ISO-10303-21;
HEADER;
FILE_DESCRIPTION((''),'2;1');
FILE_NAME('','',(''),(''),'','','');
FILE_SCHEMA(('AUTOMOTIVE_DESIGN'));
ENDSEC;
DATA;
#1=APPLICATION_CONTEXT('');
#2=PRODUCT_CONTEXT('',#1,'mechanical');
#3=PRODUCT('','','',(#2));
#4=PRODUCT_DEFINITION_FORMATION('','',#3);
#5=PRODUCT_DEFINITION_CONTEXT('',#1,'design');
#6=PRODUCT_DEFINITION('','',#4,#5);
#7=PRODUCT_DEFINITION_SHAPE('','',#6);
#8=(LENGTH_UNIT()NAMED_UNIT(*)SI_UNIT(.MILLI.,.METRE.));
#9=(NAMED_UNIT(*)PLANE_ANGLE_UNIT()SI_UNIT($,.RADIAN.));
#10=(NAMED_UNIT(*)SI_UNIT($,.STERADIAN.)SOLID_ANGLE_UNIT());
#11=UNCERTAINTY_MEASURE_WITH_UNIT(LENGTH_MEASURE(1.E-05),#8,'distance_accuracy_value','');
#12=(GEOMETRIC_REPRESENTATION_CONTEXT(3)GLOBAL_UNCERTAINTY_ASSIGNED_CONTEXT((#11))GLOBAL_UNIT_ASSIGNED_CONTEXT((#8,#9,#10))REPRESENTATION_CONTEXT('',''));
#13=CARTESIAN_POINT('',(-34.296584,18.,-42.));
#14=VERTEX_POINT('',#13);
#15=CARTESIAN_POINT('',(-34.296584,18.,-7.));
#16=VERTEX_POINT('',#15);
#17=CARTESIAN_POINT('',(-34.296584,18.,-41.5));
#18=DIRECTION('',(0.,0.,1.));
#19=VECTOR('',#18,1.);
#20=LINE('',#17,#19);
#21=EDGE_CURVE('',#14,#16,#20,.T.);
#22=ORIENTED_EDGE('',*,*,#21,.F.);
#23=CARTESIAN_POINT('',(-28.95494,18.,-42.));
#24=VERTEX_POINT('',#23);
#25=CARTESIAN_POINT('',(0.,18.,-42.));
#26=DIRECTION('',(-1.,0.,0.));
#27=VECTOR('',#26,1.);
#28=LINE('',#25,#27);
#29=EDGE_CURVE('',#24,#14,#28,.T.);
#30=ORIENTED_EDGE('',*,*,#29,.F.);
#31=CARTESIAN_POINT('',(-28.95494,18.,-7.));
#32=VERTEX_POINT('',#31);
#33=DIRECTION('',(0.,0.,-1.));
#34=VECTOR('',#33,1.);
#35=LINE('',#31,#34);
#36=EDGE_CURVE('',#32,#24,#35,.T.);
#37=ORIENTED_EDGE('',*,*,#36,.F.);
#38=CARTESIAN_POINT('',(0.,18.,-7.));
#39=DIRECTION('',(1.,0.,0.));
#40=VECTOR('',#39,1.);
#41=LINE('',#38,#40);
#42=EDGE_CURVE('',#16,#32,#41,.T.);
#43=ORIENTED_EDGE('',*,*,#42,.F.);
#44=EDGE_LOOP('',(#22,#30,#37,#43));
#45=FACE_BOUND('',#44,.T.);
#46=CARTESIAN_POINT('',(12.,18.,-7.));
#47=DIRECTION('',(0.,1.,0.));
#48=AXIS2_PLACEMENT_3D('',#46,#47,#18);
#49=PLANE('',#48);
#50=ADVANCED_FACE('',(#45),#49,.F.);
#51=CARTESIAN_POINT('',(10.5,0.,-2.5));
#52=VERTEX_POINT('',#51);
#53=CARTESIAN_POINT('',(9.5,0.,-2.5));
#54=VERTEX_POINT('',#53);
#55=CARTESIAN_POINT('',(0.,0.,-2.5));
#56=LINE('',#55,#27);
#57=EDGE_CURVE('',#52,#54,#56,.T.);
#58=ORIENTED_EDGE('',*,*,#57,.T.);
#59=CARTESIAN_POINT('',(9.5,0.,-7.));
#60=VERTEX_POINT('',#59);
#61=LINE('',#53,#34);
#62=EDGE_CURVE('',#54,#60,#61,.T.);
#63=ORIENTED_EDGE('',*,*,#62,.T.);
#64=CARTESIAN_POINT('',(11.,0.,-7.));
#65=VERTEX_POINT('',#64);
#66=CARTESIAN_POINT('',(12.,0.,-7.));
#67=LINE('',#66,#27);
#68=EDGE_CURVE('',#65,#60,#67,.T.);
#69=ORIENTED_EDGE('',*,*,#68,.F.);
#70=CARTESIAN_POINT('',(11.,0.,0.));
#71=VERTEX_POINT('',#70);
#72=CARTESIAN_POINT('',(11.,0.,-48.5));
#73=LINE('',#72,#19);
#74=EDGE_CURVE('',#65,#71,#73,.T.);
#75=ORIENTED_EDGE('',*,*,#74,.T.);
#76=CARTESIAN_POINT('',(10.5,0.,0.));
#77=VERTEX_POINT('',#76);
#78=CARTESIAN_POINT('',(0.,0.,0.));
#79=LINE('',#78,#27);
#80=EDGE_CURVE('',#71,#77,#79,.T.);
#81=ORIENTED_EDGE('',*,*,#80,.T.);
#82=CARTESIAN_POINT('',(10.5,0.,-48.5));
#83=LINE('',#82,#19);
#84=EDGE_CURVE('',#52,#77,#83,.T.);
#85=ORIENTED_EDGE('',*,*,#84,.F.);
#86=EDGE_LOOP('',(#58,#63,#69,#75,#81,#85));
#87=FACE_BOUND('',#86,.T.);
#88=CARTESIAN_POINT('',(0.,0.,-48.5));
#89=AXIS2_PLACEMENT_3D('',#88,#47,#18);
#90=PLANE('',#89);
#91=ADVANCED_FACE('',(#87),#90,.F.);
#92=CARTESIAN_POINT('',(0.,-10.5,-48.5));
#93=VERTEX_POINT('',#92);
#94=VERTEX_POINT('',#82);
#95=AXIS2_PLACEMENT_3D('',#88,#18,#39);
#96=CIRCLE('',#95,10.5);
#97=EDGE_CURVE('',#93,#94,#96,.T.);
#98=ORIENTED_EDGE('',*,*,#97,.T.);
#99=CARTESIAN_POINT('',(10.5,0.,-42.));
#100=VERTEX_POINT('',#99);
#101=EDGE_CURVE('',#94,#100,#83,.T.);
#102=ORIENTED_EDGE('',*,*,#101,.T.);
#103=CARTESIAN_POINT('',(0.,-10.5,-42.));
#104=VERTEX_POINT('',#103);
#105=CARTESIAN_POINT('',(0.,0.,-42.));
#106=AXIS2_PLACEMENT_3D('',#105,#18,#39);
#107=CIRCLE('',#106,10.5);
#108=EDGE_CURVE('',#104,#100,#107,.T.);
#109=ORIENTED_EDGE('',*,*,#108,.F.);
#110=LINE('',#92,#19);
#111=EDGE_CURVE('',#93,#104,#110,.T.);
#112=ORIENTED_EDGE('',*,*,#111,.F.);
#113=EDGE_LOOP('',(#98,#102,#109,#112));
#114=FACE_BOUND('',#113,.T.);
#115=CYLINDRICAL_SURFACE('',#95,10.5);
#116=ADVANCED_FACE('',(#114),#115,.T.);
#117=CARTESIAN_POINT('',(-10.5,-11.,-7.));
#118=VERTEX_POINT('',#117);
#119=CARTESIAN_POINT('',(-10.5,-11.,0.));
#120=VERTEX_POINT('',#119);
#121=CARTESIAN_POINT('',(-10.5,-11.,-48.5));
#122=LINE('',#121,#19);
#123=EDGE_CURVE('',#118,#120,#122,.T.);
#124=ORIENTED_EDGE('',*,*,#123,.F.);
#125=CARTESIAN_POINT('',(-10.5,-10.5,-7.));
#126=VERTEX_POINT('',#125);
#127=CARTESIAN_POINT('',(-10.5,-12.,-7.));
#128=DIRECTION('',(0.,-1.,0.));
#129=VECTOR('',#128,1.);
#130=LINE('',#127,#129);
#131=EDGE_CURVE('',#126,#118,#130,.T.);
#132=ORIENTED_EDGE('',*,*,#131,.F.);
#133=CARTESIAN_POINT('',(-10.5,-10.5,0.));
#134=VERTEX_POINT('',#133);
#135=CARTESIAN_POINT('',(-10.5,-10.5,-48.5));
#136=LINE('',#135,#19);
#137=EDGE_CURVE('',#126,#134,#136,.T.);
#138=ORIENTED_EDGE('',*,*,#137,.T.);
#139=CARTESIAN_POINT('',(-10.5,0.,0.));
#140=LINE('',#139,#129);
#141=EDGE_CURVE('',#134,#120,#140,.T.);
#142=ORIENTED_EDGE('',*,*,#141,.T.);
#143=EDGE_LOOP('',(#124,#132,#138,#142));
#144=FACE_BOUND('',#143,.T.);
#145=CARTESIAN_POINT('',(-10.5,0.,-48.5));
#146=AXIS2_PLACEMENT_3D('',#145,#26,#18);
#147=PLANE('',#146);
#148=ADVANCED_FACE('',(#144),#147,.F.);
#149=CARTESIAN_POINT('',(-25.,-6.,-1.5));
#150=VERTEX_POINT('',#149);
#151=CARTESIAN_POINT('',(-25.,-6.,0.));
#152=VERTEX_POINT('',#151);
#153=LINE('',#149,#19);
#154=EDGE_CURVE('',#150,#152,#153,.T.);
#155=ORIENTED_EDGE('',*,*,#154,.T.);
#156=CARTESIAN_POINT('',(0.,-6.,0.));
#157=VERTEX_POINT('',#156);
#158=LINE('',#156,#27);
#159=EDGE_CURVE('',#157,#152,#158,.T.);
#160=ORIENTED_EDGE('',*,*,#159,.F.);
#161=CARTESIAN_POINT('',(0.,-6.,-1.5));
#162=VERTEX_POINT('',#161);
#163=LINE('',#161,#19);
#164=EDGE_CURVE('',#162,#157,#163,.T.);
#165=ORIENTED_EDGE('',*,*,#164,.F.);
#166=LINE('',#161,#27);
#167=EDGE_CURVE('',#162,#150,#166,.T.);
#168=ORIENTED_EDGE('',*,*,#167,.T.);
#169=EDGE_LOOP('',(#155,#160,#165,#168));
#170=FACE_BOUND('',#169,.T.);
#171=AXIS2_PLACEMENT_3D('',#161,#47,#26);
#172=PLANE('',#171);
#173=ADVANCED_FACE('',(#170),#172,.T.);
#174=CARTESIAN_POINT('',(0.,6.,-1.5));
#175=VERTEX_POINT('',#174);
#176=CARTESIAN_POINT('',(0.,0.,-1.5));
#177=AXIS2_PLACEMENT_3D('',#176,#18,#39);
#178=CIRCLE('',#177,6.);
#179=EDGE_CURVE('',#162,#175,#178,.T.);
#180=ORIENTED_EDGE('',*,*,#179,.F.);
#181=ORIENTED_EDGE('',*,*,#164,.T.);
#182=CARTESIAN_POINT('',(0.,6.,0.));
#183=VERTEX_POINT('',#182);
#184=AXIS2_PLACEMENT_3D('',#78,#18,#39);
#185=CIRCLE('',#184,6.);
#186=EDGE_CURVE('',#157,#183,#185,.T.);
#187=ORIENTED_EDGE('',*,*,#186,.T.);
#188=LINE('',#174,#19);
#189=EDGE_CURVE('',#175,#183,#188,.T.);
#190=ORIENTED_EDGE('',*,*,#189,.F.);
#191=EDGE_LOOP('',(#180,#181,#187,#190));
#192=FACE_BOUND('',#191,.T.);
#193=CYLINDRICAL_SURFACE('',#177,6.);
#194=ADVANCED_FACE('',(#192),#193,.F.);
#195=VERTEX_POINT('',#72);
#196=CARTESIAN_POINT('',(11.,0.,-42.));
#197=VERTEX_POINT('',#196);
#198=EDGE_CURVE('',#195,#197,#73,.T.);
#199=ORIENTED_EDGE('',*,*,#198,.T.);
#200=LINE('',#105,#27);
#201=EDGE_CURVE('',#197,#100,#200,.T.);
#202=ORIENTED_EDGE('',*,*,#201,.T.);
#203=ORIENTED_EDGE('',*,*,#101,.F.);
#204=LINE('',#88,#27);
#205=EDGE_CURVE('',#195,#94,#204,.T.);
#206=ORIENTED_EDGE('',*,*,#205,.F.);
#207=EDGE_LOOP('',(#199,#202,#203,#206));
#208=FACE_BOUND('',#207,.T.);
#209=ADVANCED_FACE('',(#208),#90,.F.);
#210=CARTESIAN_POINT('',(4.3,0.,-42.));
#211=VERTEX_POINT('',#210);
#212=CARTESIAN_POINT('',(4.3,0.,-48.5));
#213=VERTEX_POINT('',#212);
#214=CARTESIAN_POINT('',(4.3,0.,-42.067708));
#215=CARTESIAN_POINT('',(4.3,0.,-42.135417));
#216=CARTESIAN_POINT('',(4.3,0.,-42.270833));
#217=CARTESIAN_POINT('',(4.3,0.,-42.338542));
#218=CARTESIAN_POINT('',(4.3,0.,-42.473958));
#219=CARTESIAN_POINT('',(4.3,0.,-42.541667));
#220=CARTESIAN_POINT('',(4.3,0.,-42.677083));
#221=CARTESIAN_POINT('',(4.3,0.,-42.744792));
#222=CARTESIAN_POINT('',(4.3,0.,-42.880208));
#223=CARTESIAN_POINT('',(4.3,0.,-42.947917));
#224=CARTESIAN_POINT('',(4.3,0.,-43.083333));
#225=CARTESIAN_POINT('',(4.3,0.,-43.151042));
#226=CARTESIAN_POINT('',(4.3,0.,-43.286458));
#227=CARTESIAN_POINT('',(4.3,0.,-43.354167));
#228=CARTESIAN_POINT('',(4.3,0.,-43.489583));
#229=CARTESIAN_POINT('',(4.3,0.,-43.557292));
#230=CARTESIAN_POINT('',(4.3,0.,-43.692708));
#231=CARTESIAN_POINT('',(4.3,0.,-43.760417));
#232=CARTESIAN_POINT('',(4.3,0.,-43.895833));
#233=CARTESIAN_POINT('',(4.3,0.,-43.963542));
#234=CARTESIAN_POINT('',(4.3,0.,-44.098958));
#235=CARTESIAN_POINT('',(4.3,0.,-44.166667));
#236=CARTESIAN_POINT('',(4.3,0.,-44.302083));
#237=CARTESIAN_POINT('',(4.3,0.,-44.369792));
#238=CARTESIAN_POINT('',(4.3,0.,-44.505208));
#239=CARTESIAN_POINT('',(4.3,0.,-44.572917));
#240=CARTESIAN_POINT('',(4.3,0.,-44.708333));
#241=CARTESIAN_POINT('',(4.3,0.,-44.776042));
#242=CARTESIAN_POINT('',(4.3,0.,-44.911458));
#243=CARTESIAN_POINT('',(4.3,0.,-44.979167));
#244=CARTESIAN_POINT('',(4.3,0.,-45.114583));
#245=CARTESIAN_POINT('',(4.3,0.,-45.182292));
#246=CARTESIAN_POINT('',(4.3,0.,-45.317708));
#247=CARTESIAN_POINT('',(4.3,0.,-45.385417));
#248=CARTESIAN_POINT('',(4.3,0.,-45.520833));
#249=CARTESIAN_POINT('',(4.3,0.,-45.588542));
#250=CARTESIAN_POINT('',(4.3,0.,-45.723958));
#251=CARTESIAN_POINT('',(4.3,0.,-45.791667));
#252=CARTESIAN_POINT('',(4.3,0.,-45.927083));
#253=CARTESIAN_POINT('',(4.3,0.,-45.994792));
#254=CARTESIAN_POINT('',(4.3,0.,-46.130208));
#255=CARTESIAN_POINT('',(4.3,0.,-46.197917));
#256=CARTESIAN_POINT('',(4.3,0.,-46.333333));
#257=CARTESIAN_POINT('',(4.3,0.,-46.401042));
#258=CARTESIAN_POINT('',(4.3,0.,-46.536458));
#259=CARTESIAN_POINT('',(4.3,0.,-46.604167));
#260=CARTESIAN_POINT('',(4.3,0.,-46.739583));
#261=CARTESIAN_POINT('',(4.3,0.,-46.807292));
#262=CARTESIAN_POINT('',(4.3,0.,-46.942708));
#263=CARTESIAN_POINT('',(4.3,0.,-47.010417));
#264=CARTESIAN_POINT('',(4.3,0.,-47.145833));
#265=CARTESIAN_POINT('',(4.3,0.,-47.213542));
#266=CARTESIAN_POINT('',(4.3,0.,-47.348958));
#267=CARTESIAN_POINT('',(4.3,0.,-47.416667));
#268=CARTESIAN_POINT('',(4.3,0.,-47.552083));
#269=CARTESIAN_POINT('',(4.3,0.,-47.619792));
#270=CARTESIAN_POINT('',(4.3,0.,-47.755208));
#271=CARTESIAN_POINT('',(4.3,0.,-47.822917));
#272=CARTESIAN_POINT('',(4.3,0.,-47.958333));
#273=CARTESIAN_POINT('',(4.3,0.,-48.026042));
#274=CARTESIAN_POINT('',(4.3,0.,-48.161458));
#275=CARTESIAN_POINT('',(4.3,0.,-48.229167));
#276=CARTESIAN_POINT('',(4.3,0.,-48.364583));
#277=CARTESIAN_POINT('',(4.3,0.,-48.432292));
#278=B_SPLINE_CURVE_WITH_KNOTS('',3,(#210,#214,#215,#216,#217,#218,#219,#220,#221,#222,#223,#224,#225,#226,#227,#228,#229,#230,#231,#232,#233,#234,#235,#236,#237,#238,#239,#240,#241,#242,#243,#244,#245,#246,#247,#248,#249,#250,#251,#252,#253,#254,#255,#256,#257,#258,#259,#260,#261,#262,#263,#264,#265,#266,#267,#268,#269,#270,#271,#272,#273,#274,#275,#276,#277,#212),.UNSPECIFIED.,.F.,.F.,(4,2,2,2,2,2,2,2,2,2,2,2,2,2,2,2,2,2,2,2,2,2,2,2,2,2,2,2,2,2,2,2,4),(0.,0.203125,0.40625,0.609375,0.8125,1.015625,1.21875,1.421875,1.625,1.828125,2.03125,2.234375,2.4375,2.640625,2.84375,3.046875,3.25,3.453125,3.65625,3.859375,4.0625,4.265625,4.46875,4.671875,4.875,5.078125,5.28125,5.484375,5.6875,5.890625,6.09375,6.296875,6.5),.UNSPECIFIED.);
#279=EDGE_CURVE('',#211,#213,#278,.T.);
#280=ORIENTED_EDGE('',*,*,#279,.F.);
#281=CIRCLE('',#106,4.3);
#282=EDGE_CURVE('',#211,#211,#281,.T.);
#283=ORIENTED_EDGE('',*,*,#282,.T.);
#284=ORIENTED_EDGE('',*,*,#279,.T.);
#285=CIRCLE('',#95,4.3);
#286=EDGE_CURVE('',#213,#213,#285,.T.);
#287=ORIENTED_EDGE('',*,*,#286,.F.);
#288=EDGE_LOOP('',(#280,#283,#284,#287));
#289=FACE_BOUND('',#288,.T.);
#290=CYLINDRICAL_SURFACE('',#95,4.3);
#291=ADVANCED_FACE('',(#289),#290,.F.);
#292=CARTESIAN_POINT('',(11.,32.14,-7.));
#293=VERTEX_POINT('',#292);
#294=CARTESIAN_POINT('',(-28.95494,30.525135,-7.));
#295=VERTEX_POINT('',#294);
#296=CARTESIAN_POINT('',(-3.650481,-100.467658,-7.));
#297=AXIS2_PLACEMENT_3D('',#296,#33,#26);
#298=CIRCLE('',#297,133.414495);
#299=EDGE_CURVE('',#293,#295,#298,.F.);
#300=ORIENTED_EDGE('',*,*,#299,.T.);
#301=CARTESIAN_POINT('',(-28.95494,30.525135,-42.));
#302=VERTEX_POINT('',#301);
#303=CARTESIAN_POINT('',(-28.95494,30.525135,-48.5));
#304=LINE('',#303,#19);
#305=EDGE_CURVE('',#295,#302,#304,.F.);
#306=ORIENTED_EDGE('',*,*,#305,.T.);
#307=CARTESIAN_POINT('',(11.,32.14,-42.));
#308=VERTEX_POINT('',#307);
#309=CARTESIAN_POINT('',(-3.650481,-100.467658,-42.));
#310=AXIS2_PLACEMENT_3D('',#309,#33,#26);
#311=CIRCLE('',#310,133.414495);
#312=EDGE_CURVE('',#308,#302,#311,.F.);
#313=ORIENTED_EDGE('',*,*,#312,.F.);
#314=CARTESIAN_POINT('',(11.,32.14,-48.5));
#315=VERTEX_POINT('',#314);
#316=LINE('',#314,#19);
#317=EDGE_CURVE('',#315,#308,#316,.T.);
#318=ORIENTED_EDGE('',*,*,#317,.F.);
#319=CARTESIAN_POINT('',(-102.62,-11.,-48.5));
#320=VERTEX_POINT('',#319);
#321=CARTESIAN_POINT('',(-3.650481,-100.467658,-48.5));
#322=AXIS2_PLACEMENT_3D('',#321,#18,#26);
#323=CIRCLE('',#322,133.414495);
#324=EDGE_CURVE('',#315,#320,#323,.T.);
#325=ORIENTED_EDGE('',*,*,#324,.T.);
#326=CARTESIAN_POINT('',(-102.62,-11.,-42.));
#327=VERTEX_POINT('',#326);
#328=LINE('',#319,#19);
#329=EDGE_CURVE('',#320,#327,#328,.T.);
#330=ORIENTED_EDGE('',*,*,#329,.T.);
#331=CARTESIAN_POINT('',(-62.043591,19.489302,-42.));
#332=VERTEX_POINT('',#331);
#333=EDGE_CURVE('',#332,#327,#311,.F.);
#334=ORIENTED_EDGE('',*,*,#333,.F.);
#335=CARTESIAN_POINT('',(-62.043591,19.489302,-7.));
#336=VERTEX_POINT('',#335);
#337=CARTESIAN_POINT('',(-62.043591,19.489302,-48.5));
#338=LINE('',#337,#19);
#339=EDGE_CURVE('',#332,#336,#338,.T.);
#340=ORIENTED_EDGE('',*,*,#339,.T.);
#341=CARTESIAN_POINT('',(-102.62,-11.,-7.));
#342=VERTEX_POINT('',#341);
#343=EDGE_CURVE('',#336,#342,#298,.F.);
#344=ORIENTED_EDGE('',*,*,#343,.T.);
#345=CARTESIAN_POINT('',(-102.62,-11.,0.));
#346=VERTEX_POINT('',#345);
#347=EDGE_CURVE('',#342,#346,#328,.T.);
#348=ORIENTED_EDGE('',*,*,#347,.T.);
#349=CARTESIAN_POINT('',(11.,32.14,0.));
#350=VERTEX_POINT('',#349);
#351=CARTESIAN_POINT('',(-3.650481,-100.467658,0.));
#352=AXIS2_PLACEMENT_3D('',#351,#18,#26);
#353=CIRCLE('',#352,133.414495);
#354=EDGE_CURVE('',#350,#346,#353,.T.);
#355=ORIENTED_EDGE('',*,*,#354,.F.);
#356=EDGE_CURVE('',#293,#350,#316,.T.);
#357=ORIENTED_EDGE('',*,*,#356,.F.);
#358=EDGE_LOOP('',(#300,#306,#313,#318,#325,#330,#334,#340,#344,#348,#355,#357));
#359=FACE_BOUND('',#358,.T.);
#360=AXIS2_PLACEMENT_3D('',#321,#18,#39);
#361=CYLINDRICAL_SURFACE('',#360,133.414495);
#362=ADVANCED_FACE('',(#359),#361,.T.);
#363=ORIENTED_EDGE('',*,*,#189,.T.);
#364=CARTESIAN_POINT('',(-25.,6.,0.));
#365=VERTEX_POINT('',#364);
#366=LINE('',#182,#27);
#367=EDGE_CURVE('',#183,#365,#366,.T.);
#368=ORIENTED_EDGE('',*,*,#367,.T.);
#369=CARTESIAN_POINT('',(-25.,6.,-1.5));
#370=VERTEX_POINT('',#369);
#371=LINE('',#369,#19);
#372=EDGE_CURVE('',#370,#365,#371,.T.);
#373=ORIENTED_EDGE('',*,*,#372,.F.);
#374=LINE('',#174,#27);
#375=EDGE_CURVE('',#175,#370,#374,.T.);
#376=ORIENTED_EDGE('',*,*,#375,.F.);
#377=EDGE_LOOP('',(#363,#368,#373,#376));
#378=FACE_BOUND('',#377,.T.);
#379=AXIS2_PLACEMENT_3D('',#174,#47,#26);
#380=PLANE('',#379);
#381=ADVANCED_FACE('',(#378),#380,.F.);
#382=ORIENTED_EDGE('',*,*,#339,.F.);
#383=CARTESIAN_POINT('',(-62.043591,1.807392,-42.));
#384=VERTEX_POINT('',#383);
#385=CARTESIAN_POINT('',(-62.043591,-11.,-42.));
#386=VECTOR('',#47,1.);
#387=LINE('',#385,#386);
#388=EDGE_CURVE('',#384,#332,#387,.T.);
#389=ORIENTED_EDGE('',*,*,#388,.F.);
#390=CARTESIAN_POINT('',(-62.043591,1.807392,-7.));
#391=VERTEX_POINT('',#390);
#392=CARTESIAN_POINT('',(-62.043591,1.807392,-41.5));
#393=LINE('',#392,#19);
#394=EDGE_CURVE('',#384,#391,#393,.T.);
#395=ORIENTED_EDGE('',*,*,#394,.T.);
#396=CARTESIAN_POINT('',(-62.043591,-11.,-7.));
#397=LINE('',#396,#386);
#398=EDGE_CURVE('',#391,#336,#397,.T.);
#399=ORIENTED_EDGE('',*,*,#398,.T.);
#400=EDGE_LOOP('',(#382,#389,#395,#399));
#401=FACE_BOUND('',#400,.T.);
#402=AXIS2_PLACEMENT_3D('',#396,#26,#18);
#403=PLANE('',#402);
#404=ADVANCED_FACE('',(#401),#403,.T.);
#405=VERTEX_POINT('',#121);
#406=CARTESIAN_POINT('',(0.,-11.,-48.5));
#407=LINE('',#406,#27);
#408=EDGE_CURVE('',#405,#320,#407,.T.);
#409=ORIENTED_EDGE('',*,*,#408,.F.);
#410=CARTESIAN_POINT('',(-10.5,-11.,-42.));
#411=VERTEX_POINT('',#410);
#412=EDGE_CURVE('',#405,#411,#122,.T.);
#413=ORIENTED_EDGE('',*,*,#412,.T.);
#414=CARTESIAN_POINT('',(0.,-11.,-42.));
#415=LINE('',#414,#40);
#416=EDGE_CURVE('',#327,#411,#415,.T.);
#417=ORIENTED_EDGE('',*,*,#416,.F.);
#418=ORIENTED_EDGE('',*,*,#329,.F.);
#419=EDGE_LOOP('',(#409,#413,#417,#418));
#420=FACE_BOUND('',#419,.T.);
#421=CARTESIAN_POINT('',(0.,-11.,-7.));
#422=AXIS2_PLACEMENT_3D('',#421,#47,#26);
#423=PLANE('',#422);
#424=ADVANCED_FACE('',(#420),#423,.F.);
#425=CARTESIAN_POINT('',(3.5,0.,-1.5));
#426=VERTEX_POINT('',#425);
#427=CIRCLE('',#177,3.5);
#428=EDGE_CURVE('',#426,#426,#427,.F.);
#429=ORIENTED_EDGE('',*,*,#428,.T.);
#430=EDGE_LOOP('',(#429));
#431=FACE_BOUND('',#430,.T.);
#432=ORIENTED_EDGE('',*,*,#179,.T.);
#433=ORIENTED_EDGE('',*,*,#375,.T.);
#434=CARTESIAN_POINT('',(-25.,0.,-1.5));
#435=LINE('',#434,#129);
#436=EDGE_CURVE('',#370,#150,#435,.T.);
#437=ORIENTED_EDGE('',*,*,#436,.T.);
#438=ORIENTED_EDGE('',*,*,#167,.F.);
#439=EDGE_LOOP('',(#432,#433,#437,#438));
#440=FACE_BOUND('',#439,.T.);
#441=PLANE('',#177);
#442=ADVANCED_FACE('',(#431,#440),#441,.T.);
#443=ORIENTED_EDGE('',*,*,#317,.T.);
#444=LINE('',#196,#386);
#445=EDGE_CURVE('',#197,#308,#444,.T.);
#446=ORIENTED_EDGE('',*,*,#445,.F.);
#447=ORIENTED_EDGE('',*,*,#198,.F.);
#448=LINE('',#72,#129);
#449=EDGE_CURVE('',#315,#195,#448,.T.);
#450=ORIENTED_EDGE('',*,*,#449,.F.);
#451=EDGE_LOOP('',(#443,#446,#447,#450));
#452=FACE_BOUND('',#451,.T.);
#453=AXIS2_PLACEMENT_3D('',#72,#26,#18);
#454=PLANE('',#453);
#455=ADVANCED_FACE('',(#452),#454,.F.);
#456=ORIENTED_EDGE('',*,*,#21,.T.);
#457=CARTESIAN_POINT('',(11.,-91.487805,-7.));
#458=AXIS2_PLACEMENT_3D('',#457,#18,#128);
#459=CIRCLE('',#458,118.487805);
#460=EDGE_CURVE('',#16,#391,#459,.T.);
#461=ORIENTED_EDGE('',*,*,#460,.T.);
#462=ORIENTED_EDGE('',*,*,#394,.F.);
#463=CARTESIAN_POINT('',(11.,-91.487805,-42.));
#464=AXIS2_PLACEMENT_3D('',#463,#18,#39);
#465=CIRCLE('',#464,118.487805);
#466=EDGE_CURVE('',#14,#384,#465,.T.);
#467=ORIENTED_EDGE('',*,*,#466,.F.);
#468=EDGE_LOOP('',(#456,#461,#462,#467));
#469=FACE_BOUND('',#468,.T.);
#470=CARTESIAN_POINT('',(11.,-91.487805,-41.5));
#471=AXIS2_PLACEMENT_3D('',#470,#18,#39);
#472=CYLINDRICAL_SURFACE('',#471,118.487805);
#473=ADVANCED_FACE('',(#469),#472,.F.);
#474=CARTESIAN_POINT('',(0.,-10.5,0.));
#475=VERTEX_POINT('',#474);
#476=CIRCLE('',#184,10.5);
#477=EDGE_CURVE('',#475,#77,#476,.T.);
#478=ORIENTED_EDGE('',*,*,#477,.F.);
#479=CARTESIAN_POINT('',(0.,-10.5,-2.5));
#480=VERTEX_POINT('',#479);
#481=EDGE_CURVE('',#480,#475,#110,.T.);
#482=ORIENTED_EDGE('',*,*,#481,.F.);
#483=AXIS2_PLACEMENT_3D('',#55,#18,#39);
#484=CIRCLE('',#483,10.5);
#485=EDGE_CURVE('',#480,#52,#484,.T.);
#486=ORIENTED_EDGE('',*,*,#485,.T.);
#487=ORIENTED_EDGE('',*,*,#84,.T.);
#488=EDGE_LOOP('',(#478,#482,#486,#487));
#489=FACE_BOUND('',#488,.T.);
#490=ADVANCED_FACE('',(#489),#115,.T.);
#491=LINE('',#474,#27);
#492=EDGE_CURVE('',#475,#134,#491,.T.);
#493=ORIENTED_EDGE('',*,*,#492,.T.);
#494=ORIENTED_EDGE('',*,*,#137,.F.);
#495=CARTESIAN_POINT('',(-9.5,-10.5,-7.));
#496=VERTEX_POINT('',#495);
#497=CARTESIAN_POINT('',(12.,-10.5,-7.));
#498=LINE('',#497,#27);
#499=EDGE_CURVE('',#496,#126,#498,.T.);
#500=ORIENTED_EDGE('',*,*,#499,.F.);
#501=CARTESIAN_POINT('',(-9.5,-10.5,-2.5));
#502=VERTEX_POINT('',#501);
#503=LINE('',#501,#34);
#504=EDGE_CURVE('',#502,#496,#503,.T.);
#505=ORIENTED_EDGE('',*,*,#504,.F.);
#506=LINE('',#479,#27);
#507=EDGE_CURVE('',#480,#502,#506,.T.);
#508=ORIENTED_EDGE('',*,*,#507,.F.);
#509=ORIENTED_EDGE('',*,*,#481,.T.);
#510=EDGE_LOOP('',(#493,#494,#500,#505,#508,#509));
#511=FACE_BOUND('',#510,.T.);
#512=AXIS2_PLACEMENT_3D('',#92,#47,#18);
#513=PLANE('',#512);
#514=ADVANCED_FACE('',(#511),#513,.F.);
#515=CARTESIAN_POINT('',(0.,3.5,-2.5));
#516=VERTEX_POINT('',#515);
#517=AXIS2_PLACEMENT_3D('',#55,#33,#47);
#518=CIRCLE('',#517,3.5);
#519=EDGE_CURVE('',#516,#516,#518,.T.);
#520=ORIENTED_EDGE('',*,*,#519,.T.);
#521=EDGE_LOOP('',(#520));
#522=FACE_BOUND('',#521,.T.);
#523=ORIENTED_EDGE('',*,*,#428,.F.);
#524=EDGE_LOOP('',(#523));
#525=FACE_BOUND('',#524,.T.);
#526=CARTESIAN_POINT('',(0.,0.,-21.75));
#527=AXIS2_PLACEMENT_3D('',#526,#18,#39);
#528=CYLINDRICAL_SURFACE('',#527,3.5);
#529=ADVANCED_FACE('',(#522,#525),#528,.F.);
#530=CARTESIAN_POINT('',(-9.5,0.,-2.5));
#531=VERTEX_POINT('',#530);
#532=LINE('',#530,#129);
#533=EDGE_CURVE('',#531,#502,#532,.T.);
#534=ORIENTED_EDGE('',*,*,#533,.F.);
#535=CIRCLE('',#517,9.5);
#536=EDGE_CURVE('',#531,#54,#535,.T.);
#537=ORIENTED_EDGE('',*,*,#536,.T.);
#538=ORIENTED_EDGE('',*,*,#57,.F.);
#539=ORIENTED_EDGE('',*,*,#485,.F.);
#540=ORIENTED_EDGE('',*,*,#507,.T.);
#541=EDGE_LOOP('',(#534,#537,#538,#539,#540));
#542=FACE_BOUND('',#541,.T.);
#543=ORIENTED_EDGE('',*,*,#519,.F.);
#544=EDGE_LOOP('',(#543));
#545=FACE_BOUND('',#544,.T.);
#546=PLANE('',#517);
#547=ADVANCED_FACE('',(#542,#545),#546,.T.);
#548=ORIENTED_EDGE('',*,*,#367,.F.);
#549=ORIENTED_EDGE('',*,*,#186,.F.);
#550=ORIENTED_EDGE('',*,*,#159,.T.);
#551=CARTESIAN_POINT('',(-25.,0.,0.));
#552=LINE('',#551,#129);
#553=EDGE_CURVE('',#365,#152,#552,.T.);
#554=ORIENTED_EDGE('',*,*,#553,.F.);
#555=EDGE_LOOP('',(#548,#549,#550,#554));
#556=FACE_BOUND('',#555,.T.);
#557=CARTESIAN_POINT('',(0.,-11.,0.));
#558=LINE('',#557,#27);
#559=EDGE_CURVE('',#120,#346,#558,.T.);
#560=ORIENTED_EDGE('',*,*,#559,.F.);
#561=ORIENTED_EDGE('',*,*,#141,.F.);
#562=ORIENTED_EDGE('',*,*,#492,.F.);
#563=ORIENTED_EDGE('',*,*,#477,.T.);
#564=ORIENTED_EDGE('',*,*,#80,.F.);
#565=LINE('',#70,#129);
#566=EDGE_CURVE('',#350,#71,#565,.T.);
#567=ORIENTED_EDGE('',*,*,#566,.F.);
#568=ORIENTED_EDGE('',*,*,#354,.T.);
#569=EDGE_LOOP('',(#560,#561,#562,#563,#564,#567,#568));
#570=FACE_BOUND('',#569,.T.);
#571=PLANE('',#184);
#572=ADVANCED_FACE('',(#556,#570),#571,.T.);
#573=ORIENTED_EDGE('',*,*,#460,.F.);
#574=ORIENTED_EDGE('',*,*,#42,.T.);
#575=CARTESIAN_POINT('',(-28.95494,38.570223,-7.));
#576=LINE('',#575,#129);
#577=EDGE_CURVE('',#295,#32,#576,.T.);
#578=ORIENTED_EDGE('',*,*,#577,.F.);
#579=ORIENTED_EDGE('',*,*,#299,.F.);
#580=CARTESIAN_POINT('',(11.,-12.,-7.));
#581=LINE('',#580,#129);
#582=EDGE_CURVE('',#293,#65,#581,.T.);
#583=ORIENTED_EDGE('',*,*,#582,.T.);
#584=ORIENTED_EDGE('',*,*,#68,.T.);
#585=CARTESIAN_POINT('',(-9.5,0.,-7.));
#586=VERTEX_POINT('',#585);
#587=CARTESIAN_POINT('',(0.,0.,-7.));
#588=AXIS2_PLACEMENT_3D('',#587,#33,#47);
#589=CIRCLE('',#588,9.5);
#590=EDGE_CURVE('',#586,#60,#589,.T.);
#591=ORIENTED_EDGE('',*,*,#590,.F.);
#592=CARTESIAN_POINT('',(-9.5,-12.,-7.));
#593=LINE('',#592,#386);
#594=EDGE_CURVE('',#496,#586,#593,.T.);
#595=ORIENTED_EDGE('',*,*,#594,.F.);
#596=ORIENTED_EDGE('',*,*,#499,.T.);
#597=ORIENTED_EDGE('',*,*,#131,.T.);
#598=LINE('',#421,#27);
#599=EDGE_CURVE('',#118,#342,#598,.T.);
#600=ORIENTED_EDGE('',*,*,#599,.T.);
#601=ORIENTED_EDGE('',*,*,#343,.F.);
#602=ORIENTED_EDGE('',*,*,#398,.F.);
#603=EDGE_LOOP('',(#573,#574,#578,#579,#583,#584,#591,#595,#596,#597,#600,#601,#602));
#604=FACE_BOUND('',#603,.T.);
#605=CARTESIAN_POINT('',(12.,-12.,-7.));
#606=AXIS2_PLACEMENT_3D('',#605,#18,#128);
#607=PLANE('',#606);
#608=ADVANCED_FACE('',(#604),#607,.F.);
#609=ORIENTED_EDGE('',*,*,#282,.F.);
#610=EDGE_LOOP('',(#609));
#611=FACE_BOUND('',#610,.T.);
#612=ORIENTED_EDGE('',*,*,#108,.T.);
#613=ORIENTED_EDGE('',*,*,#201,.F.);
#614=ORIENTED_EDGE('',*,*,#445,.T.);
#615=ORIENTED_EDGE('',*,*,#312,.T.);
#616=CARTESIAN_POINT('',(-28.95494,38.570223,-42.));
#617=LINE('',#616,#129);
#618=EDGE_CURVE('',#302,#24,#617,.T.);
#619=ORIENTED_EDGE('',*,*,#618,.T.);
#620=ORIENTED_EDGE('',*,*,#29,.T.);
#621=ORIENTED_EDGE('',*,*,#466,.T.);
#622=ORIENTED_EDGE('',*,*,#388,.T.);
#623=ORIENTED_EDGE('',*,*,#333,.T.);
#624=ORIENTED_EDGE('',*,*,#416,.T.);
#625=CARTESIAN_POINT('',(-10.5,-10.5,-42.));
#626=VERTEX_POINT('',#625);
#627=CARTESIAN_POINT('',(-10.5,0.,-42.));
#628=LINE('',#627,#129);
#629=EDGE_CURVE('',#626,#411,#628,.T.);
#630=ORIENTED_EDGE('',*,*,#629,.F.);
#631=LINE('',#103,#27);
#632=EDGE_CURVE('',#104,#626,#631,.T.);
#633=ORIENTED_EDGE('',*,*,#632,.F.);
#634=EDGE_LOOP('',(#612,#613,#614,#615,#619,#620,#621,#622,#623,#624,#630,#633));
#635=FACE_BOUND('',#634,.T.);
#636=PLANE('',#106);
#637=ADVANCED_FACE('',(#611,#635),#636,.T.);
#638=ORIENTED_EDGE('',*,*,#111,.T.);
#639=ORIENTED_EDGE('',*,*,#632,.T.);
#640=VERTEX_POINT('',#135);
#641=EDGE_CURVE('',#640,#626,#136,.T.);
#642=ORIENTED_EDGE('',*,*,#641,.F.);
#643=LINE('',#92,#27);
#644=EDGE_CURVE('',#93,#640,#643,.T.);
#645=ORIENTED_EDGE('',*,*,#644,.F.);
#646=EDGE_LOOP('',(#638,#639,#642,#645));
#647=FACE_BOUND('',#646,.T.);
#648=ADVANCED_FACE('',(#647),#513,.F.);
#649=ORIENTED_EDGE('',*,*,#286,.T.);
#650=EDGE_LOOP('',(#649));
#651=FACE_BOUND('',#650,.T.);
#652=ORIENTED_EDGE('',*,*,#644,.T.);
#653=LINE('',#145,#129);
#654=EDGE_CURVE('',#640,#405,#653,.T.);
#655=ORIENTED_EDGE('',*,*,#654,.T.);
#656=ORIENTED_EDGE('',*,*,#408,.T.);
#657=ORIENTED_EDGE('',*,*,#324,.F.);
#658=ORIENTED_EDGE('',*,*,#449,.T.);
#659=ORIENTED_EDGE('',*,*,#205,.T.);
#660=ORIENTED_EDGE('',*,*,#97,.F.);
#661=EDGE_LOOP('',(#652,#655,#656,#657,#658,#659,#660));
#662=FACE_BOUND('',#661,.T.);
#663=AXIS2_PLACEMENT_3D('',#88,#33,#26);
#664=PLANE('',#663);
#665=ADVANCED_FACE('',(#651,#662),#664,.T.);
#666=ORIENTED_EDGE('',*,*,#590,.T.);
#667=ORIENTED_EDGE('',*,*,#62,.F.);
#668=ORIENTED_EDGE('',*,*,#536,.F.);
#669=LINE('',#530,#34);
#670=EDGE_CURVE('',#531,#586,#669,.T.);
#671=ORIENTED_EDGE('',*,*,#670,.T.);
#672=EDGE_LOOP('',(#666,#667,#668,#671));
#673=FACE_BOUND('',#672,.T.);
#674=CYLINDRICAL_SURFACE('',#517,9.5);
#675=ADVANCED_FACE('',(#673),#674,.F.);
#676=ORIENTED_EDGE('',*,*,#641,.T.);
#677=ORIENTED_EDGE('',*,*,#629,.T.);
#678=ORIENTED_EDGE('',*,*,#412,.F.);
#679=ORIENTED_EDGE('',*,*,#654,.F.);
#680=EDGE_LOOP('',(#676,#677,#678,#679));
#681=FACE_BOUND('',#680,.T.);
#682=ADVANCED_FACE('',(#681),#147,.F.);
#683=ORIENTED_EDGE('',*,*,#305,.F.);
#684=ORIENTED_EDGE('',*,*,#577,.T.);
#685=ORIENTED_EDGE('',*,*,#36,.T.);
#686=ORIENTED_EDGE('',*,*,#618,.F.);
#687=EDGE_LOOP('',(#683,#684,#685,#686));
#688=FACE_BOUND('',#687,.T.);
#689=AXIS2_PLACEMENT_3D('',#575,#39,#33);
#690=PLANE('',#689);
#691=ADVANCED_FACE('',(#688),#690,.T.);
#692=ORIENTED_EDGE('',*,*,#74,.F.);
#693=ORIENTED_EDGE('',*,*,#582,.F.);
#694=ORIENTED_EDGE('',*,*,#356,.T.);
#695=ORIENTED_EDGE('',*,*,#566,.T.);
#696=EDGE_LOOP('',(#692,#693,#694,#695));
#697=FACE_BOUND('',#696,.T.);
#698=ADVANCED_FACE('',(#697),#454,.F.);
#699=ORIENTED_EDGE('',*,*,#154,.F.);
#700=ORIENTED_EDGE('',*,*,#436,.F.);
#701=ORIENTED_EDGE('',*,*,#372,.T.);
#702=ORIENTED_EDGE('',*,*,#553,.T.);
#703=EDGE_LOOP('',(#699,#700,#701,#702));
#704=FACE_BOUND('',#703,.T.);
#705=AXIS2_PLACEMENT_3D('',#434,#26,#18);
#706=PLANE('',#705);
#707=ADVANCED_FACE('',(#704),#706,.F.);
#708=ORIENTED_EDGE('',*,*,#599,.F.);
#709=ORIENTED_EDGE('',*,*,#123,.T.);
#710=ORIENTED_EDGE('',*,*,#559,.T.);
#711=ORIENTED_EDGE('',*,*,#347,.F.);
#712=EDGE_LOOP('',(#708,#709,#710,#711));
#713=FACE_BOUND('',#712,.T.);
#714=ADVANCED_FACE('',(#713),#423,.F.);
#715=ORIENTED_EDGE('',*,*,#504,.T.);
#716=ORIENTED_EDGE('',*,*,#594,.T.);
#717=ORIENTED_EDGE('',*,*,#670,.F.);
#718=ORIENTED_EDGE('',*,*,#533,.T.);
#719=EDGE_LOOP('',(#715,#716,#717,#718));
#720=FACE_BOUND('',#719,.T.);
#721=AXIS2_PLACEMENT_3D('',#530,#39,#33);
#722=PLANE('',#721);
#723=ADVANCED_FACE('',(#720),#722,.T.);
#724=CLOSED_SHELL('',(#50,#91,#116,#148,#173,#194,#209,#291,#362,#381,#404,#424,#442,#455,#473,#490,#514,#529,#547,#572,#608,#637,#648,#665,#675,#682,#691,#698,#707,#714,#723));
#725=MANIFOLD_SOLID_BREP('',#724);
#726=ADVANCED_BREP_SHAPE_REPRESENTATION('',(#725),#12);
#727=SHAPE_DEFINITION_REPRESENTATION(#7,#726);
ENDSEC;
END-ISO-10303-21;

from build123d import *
from build123d.topology import SkipClean

# Parameters (mm, degrees)
SKETCH1_R                 = 9.5
BOSS_EXTRUDE1_DEPTH       = 48
CUT_EXTRUDE1_DEPTH        = 62.48170459575759
BOSS_EXTRUDE2_START       = -2.5
SKETCH3_R                 = 9.5
SKETCH3_R_2               = 2.4
BOSS_EXTRUDE2_DEPTH       = 2.5
SKETCH4_R                 = 9.5
SKETCH4_R_2               = 4.2
BOSS_EXTRUDE3_DEPTH       = 7
SKETCH5_R                 = 4.2
BOSS_EXTRUDE4_DEPTH       = 11
BOSS_EXTRUDE5_DEPTH       = 48
CUT_EXTRUDE2_START        = -48
CUT_EXTRUDE2_OUTLINE_R    = 2.65
CUT_EXTRUDE2_DEPTH        = 48
CUT_EXTRUDE3_START        = -4.5
SKETCH8_R                 = 9.5
CUT_EXTRUDE3_DEPTH        = 4.5
SKETCH9_R                 = 6.067807638148196
CUT_EXTRUDE4_DEPTH        = 4.5
SKETCH10_R                = 9.5
BOSS_EXTRUDE6_DEPTH       = 4.5
SKETCH11_R                = 4.2
BOSS_EXTRUDE7_DEPTH       = 3.5
SKETCH12_R                = 2.4
BOSS_EXTRUDE8_DEPTH       = 2.5
CUT_EXTRUDE5_DEPTH        = 14.500000000000005
SKETCH15_R                = 3.436413098279149
BOSS_EXTRUDE9_DEPTH       = 10
BOSS_EXTRUDE10_DEPTH      = 0.5
SKETCH18_R                = 4.2
CUT_EXTRUDE8_DEPTH        = 0.5
CUT_EXTRUDE9_DEPTH        = 69.52919086053767
BOSS_EXTRUDE11_DEPTH      = 6.9999999999999964
CUT_EXTRUDE10_DEPTH       = 99.24586505293748
BOSS_EXTRUDE12_DEPTH      = 41.5
SKETCH25_R                = 4.2
CUT_EXTRUDE11_DEPTH       = 0.5
BOSS_EXTRUDE13_DEPTH      = 24.25
BOSS_EXTRUDE13_DEPTH_BACK = 24.25
CUT_EXTRUDE12_DEPTH       = 17.25
CUT_EXTRUDE12_DEPTH_BACK  = 17.75
SKETCH28_W                = 40.57640869896728
SKETCH28_H                = 35.258993514097796
SKETCH28_W_2              = 40.750117962367405
SKETCH28_H_2              = 26.870649991533814
SKETCH29_R                = 2.65
SKETCH29_R_2              = 2.5
BOSS_EXTRUDE14_DEPTH      = 2.5
CUT_EXTRUDE13_DEPTH       = 119.18886786333674
SKETCH31_R                = 4.3
CUT_EXTRUDE14_DEPTH       = 111.47362122614281
CUT_EXTRUDE15_DEPTH       = 21.75
SKETCH33_R                = 3.5
CUT_EXTRUDE16_DEPTH       = 21.75
CUT_EXTRUDE17_DEPTH       = 1.5


# Read off the part's stored shape, not the designer's step: Cut-Extrude2
with BuildPart() as part:
    # Sketch1 → Boss-Extrude1 (new body)
    with BuildSketch(Plane.XY):
        with BuildLine():
            Line((-12, 0), (-12, 30))
            Line((-12, 30), (12, 30))
            Line((12, 30), (12, 0))
            ThreePointArc((12, 0), (-2.2e-15, -12), (-12, 0))
        make_face()
        Circle(SKETCH1_R, mode=Mode.SUBTRACT)
    extrude(amount=-BOSS_EXTRUDE1_DEPTH)

    # Sketch2 → Cut-Extrude1 (cut, through all)
    with BuildSketch(Plane.ZY.offset(12)):
        Polygon((-6.999999999999999, -12), (-41, -12.000000000000004), (-41, 18), (-7.000000000000001, 18.000000000000004), align=None)
    extrude(amount=-CUT_EXTRUDE1_DEPTH, mode=Mode.SUBTRACT)

    # Sketch3 → Boss-Extrude2 (add)
    with BuildSketch(Plane(origin=(0, 0, -48), x_dir=(-1, 0, 0), z_dir=(0, 0, -1)).offset(BOSS_EXTRUDE2_START)):
        Circle(SKETCH3_R)
        Circle(SKETCH3_R_2, mode=Mode.SUBTRACT)
    extrude(amount=BOSS_EXTRUDE2_DEPTH)

    # Sketch4 → Boss-Extrude3 (add)
    with BuildSketch(Plane.XY):
        with Locations(Location((0, 0, 0), (0, 0, 180))):
            Circle(SKETCH4_R)
        Circle(SKETCH4_R_2, mode=Mode.SUBTRACT)
    extrude(amount=-BOSS_EXTRUDE3_DEPTH)

    # Sketch5 → Boss-Extrude4 (add)
    with BuildSketch(Plane.XY):
        Circle(SKETCH5_R)
    extrude(amount=-BOSS_EXTRUDE4_DEPTH)

    # Sketch6 → Boss-Extrude5 (add)
    with BuildSketch(Plane(origin=(0, 0, -48), x_dir=(-1, 0, 0), z_dir=(0, 0, -1))):
        Polygon((12, 30), (12, 18), (17.999999999999925, 18), (38.00000000000001, 18), (38.00000000000001, 30), align=None)
    extrude(amount=-BOSS_EXTRUDE5_DEPTH)

    # Cut-Extrude2 outline → Cut-Extrude2 (cut)
    with BuildSketch(Plane.XY.offset(CUT_EXTRUDE2_START)):
        Circle(CUT_EXTRUDE2_OUTLINE_R)
    extrude(amount=CUT_EXTRUDE2_DEPTH, mode=Mode.SUBTRACT)

    # Sketch8 → Cut-Extrude3 (cut)
    with BuildSketch(Plane(origin=(0, -4e-16, -7), x_dir=(-1, 0, 0), z_dir=(0, -6e-17, -1)).offset(CUT_EXTRUDE3_START)):
        Circle(SKETCH8_R)
    extrude(amount=CUT_EXTRUDE3_DEPTH, mode=Mode.SUBTRACT)


with BuildPart() as cut_extrude3_piece_1:
    # of the separate pieces the step leaves, piece 1, a body of its own (cut_extrude3_pieces)
    add(part.part.solids().sort_by_distance((-12, 0, 0))[0])

    # Sketch10 → Boss-Extrude6 (add)
    with BuildSketch(Plane.XY.offset(-45.5)):
        with Locations(Location((0, 0, 0), (0, 0, 90))):
            Circle(SKETCH10_R)
    extrude(amount=BOSS_EXTRUDE6_DEPTH)

    # Sketch11 → Boss-Extrude7 (add)
    with BuildSketch(Plane.XY.offset(-41)):
        with Locations(Location((0, 0, 0), (0, 0, 180))):
            Circle(SKETCH11_R)
    extrude(amount=BOSS_EXTRUDE7_DEPTH)

    # Sketch12 → Boss-Extrude8 (add)
    with BuildSketch(Plane(origin=(0, 0, -48), x_dir=(-1, 0, 0), z_dir=(0, 0, -1))):
        Circle(SKETCH12_R)
    extrude(amount=-BOSS_EXTRUDE8_DEPTH)

    # Sketch13 → Cut-Extrude5 (cut)
    with BuildSketch(Plane(origin=(0, 30, 0), x_dir=(1, 0, 0), z_dir=(0, 1, 0))):
        Polygon((12, 41), (-23.000000000000004, 41), (-22.999999999999996, 6.999999999999988), (12, 7.000000000000001), align=None)
    extrude(amount=-CUT_EXTRUDE5_DEPTH, mode=Mode.SUBTRACT)

    # Sketch15 → Boss-Extrude9 (add)
    with BuildSketch(Plane(origin=(0, 0, -48), x_dir=(-1, 0, 0), z_dir=(0, 0, -1))):
        Circle(SKETCH15_R)
    extrude(amount=-BOSS_EXTRUDE9_DEPTH)

    # Sketch16 → Boss-Extrude10 (add)
    with BuildSketch(Plane(origin=(0, 0, -48), x_dir=(-1, 0, 0), z_dir=(0, 0, -1))):
        Polygon((38.00000000000001, 30), (-12, 30), (-12, 18), (12, 18), (38.00000000000001, 18), align=None)
        with BuildLine():
            Line((-12, 0), (11.999999999999998, 0))
            ThreePointArc((11.999999999999998, 0), (-2.2e-15, -12), (-12, 0))
        make_face()
        with BuildLine():
            ThreePointArc((11.999999999999998, 0), (7.3e-16, 11.999999999999998), (-11.999999999999998, 1.47e-15))
            Line((-12, 0), (12, 0))
        make_face()
        with BuildLine():
            Line((12, 0), (-12, 0))
            ThreePointArc((-11.999999999999998, 1.47e-15), (-2.2e-15, -11.999999999999998), (11.999999999999998, -2.94e-15))
        make_face()
        with BuildLine():
            Line((12, 18), (-12, 18))
            Line((-12, 18), (-12, 0))
            ThreePointArc((-11.999999999999998, 1.47e-15), (7.3e-16, 11.999999999999998), (11.999999999999998, 0))
            Line((11.999999999999998, 0), (11.999999999999998, 18))
        make_face()
    extrude(amount=BOSS_EXTRUDE10_DEPTH)

    # Sketch18 → Cut-Extrude8 (cut)
    with SkipClean():  # the faces are left unmerged after this step: merging them gives an invalid solid
        with BuildSketch(Plane.XY.offset(-41)):
            with BuildLine():
                Line((12.000000000000004, 30), (-22.999999999999996, 30))
                Line((-22.999999999999996, 30), (-22.999999999999996, 18))
                Line((-22.999999999999996, 18), (-12.000000000000002, 18))
                Line((-12.000000000000002, 18), (-12.000000000000002, 0))
                ThreePointArc((-12, 1.47e-15), (-2.2e-15, -12), (12, -2.94e-15))
                Line((12, 0), (12, 30))
            make_face()
            Circle(SKETCH18_R, mode=Mode.SUBTRACT)
        extrude(amount=-CUT_EXTRUDE8_DEPTH, mode=Mode.SUBTRACT)

    # Sketch19 → Cut-Extrude9 (cut, through all)
    with SkipClean():  # the faces are left unmerged after this step: merging them gives an invalid solid
        with BuildSketch(Plane.XY):
            with BuildLine():
                ThreePointArc((11, -2.69e-15), (-2.02e-15, -11), (-11, 1.35e-15))
                Line((-11, 0), (-12.000000000000002, 0))
                ThreePointArc((-12.000000000000002, 0), (-7.3e-16, -12.000000000000002), (12.000000000000002, -1.47e-15))
                Line((12, 0), (12, 30))
                Line((12, 30), (11, 30))
                Line((11, 30), (11, 0))
            make_face()
        extrude(amount=-CUT_EXTRUDE9_DEPTH, mode=Mode.SUBTRACT)

    # Sketch21 → Boss-Extrude11 (add)
    with SkipClean():  # the faces are left unmerged after this step: merging them gives an invalid solid
        with BuildSketch(Plane.XY):
            with BuildLine():
                Line((-80, -11.000000000000007), (-2.02e-15, -11))
                ThreePointArc((-2.02e-15, -11), (-11, 7.951e-14), (1.5455e-13, 11))
                Line((-9.4e-16, 11), (-2e-17, 29.50098275984317))
                ThreePointArc((1.58451e-12, 29.500982759843026), (-43.87333050880174, 16.901328954446853), (-79.99999999999999, -11.000000000000014))
            make_face()
        boss_extrude11 = extrude(amount=-BOSS_EXTRUDE11_DEPTH)

    # Mirror2: Boss-Extrude11 across plane
    with SkipClean():  # the faces are left unmerged after this step: merging them gives an invalid solid
        add(boss_extrude11.mirror(Plane.XY.offset(-24.25)))

    # Sketch23 → Cut-Extrude10 (cut, through all)
    with SkipClean():  # the faces are left unmerged after this step: merging them gives an invalid solid
        with BuildSketch(Plane.XY):
            with BuildLine():
                Line((11, 30), (-38.00000000000001, 30))
                Line((-38.00000000000001, 30), (-38.00000000000001, 19.680026503546667))
                ThreePointArc((-38.000000000000014, 19.680026503546685), (-14.03748116807828, 27.39201372395351), (10.999999999999979, 30.00000000000003))
            make_face()
        extrude(amount=-CUT_EXTRUDE10_DEPTH, mode=Mode.SUBTRACT)

    # Sketch24 → Boss-Extrude12 (add)
    with BuildSketch(Plane.XY):
        with BuildLine():
            ThreePointArc((-23.00000000000003, 25.145323923706542), (-54.060518829682096, 11.110516861146493), (-80, -11))
            Line((-80, -11.000000000000007), (-75.95443157615205, -11.000000000000004))
            ThreePointArc((-75.95443157615205, -11.000000000000028), (-51.689916223605806, 9.057380529785846), (-22.999999999999986, 22.017084465179764))
            Line((-22.999999999999996, 22.017084465179774), (-23, 25.1453239237065))
        make_face()
    extrude(amount=-BOSS_EXTRUDE12_DEPTH)

    # Sketch25 → Cut-Extrude11 (cut)
    # profile 1 of 4: a face of its own
    with BuildSketch(Plane.XY.offset(-41.5)):
        with BuildLine():
            ThreePointArc((-34.29658362177963, 17.999999999999986), (-56.6966229233105, 5.756871837942555), (-75.95443157615205, -11.000000000000028))
            Line((-75.95443157615205, -11.000000000000007), (0, -11.000000000000007))
            ThreePointArc((-2.02e-15, -11), (-7.778174593052022, 7.778174593052023), (11, 0))
            Line((10.999999999999988, 0), (10.999999999999988, 26.999999999999993))
            ThreePointArc((10.999999999999988, 26.999999999999986), (-6.181599512464837, 25.74765282571859), (-22.999999999996817, 22.017084465180716))
            Line((-23, 22.01708446518151), (-23.000000000000004, 18))
            Line((-23.000000000000004, 18), (-34.29658362177963, 18.000000000000004))
        make_face()
    # profile 2 of 4: a face of its own
    with BuildSketch(Plane.XY.offset(-41.5)):
        with BuildLine():
            ThreePointArc((11, 0), (-7.778174593052022, 7.778174593052023), (-2.02e-15, -11))
            ThreePointArc((-2.02e-15, -11), (7.778174593052021, -7.778174593052024), (11, -2.69e-15))
        make_face()
        Circle(SKETCH25_R, mode=Mode.SUBTRACT)
    # profile 3 of 4: a face of its own
    with BuildSketch(Plane.XY.offset(-41.5)):
        with BuildLine():
            Line((-15.831452239273311, 26.999999999999996), (10.999999999999986, 26.999999999999996))
            Line((11, 26.999999999999996), (11, 30))
            ThreePointArc((10.999999999999591, 30), (-2.49932247622473, 29.24767054972125), (-15.83145223927318, 26.99999999999892))
        make_face()
    # profile 4 of 4: a face of its own
    with BuildSketch(Plane.XY.offset(-41.5)):
        with BuildLine():
            ThreePointArc((-15.83145223927318, 26.99999999999892), (-19.4298595333881, 26.127289318508147), (-22.99999999999981, 25.145323923705888))
            Line((-23, 25.14532392370651), (-23, 22.01708446518151))
            ThreePointArc((-22.999999999996817, 22.017084465180716), (-6.181599512464837, 25.74765282571859), (10.999999999999988, 26.999999999999986))
            Line((10.999999999999986, 26.999999999999996), (-15.831452239273311, 26.999999999999996))
        make_face()
    extrude(amount=-CUT_EXTRUDE11_DEPTH, mode=Mode.SUBTRACT)

    # Sketch27 → Boss-Extrude13 (add, two sides: drawn at the far end of the back side and taken through both)
    with BuildSketch(Plane.XY.offset(-24.25).offset(-BOSS_EXTRUDE13_DEPTH_BACK)):
        with BuildLine():
            Line((10.999999999999988, 30), (11, 32.14))
            ThreePointArc((11, 32.14), (-51.00752842983785, 24.258993514097753), (-102.62, -11.000000000000012))
            Line((-102.62, -11.000000000000012), (-80, -11.00000000000001))
            ThreePointArc((-80, -11.00000000000001), (-38.90490957811666, 19.27675052703941), (10.999999999999988, 30))
        make_face()
    extrude(amount=BOSS_EXTRUDE13_DEPTH + BOSS_EXTRUDE13_DEPTH_BACK)

    # Sketch28 → Cut-Extrude12 (cut, two sides: drawn at the far end of the back side and taken through both)
    with BuildSketch(Plane.XY.offset(-24.25).offset(-CUT_EXTRUDE12_DEPTH_BACK)):
        with Locations((-82.33179565051637, 6.629496757048886)):
            Rectangle(SKETCH28_W, SKETCH28_H)
        with Locations((-8.579880677381787, 25.13489771564523)):
            Rectangle(SKETCH28_W_2, SKETCH28_H_2)
    extrude(amount=CUT_EXTRUDE12_DEPTH + CUT_EXTRUDE12_DEPTH_BACK, mode=Mode.SUBTRACT)

    # Sketch29 → Boss-Extrude14 (add)
    with BuildSketch(Plane.XY):
        Circle(SKETCH29_R)
        Circle(SKETCH29_R_2, mode=Mode.SUBTRACT)
    extrude(amount=-BOSS_EXTRUDE14_DEPTH)

    # Sketch30 → Cut-Extrude13 (cut, through all)
    with BuildSketch(Plane.XY):
        with BuildLine():
            ThreePointArc((-2.02e-15, -11), (7.778174593052021, -7.778174593052023), (11, 1.9e-16))
            Line((11, 0), (10.499999999999998, 0))
            ThreePointArc((10.499999999999998, -2.57e-15), (7.424621202458746, -7.4246212024587495), (-1.93e-15, -10.499999999999998))
            Line((0, -10.499999999999998), (-10.499999999999998, -10.499999999999998))
            Line((-10.499999999999998, -10.499999999999998), (-10.499999999999998, -11.000000000000002))
            Line((-10.5, -11.000000000000002), (0, -11.000000000000002))
        make_face()
    extrude(amount=-CUT_EXTRUDE13_DEPTH, mode=Mode.SUBTRACT)

    # Sketch31 → Cut-Extrude14 (cut, through all)
    with BuildSketch(Plane.XY.offset(-24.25)):
        Circle(SKETCH31_R)
    extrude(amount=-CUT_EXTRUDE14_DEPTH, mode=Mode.SUBTRACT)

    # Sketch32 → Cut-Extrude15 (cut)
    with BuildSketch(Plane.XY.offset(-24.25)):
        with BuildLine():
            Line((-9.5, -10.499999999999998), (-1.93e-15, -10.499999999999998))
            ThreePointArc((-1.93e-15, -10.499999999999998), (7.424621202458748, -7.424621202458747), (10.499999999999998, 2.31e-15))
            Line((10.499999999999998, 7e-16), (9.5, 7e-16))
            ThreePointArc((9.5, -1.63e-15), (-1.75e-15, -9.5), (-9.5, 1.86e-15))
            Line((-9.5, 7e-16), (-9.5, -10.499999999999998))
        make_face()
    extrude(amount=CUT_EXTRUDE15_DEPTH, mode=Mode.SUBTRACT)

    # Sketch33 → Cut-Extrude16 (cut)
    with BuildSketch(Plane.XY):
        Circle(SKETCH33_R)
    extrude(amount=-CUT_EXTRUDE16_DEPTH, mode=Mode.SUBTRACT)

    # Sketch34 → Cut-Extrude17 (cut)
    with BuildSketch(Plane.XY):
        with BuildLine():
            ThreePointArc((-1.1e-15, -6), (-6, 7.3e-16), (3.7e-16, 6))
            Line((0, 6), (-25, 5.9999999999999964))
            Line((-25, 5.9999999999999964), (-25, -6.0000000000000036))
            Line((-25, -6.000000000000004), (1.47e-15, -6))
        make_face()
        with BuildLine():
            ThreePointArc((6, 0), (4.242640687119286, 4.242640687119285), (3.7e-16, 6))
            Line((0, 6), (3.1e-16, 3.5))
            ThreePointArc((1.2456e-13, 3.5), (2.4748737341529603, 2.4748737341528724), (3.5, 0))
            ThreePointArc((3.5, -8.6e-16), (2.4748737341529594, -2.474873734152873), (1.237e-13, -3.5))
            Line((1.16e-15, -3.5), (1.47e-15, -6))
            ThreePointArc((-1.1e-15, -6), (4.242640687119284, -4.242640687119286), (6, -1.47e-15))
        make_face()
        with BuildLine():
            Line((3.1e-16, 3.5), (0, 6))
            ThreePointArc((3.7e-16, 6), (-6, 7.3e-16), (-1.1e-15, -6))
            Line((1.47e-15, -6), (1.16e-15, -3.5))
            ThreePointArc((1.237e-13, -3.5), (-3.5, 4.3e-16), (1.2456e-13, 3.5))
        make_face()
    extrude(amount=-CUT_EXTRUDE17_DEPTH, mode=Mode.SUBTRACT)


with BuildPart() as cut_extrude3_piece_2:
    # of the separate pieces the step leaves, piece 2, a body of its own (cut_extrude3_pieces)
    add(part.part.solids().sort_by_distance((4.2, 0, -7))[0])

    # Sketch9 → Cut-Extrude4 (cut)
    with BuildSketch(Plane(origin=(0, 0, -11), x_dir=(-1, 0, 0), z_dir=(0, 0, -1))):
        Circle(SKETCH9_R)
    extrude(amount=-CUT_EXTRUDE4_DEPTH, mode=Mode.SUBTRACT)


solid = cut_extrude3_piece_1.part
